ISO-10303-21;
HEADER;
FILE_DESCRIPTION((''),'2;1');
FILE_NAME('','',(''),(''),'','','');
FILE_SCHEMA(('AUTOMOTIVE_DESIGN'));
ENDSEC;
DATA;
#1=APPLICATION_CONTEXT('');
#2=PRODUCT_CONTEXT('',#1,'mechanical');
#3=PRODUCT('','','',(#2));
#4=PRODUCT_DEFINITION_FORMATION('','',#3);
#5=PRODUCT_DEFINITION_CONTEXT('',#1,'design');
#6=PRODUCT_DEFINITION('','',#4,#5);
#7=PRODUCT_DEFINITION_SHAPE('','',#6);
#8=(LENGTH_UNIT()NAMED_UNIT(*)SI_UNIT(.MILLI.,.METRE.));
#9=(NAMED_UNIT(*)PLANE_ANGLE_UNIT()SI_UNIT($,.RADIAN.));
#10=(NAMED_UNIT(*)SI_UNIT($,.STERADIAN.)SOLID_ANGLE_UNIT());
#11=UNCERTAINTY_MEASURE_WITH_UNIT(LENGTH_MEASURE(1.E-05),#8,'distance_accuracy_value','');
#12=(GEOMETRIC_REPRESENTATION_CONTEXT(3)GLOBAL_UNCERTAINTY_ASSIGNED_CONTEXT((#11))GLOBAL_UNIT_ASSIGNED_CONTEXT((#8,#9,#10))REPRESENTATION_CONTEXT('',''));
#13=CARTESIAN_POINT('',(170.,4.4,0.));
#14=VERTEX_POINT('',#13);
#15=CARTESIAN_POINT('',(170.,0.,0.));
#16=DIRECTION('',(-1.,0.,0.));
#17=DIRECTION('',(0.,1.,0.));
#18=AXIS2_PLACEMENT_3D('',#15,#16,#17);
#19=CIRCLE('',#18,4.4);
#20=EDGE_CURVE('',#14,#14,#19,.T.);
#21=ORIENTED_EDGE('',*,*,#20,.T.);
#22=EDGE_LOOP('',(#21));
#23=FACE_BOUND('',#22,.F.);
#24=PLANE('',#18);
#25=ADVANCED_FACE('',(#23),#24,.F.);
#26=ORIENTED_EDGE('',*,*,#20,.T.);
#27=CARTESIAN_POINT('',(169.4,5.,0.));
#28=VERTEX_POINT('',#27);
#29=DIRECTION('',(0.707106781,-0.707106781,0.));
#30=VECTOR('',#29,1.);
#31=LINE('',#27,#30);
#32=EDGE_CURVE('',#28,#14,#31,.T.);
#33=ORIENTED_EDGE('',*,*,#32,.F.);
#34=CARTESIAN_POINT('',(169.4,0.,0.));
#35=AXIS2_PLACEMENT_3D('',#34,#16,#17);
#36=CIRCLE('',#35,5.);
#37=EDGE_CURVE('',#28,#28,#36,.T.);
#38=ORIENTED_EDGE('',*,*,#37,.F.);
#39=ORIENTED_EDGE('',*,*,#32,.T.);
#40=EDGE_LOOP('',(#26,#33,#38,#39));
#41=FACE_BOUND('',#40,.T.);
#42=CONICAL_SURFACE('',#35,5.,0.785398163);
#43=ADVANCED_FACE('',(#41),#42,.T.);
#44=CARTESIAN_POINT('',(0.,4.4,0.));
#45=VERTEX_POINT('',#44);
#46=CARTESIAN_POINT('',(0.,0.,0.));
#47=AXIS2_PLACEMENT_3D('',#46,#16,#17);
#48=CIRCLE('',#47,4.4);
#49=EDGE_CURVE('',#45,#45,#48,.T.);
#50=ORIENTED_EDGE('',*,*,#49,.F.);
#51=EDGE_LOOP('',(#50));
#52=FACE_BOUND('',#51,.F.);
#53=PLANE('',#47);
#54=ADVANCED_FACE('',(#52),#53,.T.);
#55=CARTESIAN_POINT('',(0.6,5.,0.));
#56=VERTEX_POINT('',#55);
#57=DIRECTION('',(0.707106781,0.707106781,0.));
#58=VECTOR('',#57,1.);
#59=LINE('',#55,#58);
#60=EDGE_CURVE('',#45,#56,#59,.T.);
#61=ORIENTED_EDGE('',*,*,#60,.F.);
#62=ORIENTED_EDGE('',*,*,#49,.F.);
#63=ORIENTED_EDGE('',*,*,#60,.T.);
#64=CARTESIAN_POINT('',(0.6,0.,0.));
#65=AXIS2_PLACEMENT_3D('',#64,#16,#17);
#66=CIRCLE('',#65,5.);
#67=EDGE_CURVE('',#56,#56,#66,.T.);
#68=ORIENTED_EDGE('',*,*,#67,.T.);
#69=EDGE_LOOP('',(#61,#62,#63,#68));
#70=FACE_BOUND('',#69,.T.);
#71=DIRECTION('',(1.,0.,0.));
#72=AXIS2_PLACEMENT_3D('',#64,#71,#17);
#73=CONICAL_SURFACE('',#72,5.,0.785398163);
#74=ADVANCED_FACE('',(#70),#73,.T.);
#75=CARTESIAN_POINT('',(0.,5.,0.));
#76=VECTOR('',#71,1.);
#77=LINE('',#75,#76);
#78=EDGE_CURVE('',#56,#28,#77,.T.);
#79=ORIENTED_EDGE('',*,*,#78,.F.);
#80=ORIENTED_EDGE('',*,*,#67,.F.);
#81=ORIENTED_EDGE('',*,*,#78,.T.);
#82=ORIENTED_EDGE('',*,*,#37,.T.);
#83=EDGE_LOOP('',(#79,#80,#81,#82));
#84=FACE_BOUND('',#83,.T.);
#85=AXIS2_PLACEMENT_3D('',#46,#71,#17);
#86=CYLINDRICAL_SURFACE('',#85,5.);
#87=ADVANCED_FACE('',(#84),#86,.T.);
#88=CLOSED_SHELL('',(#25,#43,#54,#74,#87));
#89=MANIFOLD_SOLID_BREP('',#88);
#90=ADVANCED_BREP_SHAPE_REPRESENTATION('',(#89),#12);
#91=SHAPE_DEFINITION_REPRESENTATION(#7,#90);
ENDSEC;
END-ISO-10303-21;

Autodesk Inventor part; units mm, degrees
ref_plane "XZ Plane" through (0, 0, 0) normal (0, 1, 0) x (-1, 0, 0)
ref_plane "XY Plane" through (0, 0, 0) normal (0, 0, 1) x (1, 0, 0)
sketch "Sketch1" plane through (0, 0, 0) normal (0, 0, 1) x (1, 0, 0)
  line L0 (0, 0) -> (0, 5)
  line L1 (0, 5) -> (170, 5)
  line L2 (170, 5) -> (170, 0)
  line L3 (170, 0) -> (0, 0)
  dimension "d3" = 10
  dimension "d58" = 170
revolve "Вращение1" add sketch "Sketch1" angle 360 about axis through (170, 0, 0) along (-1, 0, 0)
thread "Резьба1" size "M10x1.25" class "6g" standard "ISO Metric profile" length 32
thread "Резьба2" size "M10x1.25" class "6g" standard "ISO Metric profile" length 32
chamfer "Фаска1" distance 0.6 angle 45 2 edges at (170, -5, 0) (0, -5, 0)
ref_plane "Work Plane1" through (32, 0, 0) normal (1, 0, 0) x (0, 1, 0)
sketch "Sketch2" plane through (32, 0, 0) normal (1, 0, 0) x (0, 1, 0)
  circle A0 centre (0, 0) radius 5
  dimension "d60" = 10
boundary_patch "Участок поверхности1"
equation "\"d49\" = b"
equation "\"d51\" = b"
equation "\"d53\" = chamfer"
equation "\"d3\" = d"
equation "\"d58\" = L"
equation "\"chamfer\" = 0.6"
equation "\"d\" = 10"
equation "\"L\" = 170"
equation "\"b\" = 32"
equation "\"d59\" = b"
equation "\"Grip_Length\" = 106"
properties part number "Шпилька M10×1.25-8g×170 ГОСТ 22042-76" material "Сталь, мягкая"
